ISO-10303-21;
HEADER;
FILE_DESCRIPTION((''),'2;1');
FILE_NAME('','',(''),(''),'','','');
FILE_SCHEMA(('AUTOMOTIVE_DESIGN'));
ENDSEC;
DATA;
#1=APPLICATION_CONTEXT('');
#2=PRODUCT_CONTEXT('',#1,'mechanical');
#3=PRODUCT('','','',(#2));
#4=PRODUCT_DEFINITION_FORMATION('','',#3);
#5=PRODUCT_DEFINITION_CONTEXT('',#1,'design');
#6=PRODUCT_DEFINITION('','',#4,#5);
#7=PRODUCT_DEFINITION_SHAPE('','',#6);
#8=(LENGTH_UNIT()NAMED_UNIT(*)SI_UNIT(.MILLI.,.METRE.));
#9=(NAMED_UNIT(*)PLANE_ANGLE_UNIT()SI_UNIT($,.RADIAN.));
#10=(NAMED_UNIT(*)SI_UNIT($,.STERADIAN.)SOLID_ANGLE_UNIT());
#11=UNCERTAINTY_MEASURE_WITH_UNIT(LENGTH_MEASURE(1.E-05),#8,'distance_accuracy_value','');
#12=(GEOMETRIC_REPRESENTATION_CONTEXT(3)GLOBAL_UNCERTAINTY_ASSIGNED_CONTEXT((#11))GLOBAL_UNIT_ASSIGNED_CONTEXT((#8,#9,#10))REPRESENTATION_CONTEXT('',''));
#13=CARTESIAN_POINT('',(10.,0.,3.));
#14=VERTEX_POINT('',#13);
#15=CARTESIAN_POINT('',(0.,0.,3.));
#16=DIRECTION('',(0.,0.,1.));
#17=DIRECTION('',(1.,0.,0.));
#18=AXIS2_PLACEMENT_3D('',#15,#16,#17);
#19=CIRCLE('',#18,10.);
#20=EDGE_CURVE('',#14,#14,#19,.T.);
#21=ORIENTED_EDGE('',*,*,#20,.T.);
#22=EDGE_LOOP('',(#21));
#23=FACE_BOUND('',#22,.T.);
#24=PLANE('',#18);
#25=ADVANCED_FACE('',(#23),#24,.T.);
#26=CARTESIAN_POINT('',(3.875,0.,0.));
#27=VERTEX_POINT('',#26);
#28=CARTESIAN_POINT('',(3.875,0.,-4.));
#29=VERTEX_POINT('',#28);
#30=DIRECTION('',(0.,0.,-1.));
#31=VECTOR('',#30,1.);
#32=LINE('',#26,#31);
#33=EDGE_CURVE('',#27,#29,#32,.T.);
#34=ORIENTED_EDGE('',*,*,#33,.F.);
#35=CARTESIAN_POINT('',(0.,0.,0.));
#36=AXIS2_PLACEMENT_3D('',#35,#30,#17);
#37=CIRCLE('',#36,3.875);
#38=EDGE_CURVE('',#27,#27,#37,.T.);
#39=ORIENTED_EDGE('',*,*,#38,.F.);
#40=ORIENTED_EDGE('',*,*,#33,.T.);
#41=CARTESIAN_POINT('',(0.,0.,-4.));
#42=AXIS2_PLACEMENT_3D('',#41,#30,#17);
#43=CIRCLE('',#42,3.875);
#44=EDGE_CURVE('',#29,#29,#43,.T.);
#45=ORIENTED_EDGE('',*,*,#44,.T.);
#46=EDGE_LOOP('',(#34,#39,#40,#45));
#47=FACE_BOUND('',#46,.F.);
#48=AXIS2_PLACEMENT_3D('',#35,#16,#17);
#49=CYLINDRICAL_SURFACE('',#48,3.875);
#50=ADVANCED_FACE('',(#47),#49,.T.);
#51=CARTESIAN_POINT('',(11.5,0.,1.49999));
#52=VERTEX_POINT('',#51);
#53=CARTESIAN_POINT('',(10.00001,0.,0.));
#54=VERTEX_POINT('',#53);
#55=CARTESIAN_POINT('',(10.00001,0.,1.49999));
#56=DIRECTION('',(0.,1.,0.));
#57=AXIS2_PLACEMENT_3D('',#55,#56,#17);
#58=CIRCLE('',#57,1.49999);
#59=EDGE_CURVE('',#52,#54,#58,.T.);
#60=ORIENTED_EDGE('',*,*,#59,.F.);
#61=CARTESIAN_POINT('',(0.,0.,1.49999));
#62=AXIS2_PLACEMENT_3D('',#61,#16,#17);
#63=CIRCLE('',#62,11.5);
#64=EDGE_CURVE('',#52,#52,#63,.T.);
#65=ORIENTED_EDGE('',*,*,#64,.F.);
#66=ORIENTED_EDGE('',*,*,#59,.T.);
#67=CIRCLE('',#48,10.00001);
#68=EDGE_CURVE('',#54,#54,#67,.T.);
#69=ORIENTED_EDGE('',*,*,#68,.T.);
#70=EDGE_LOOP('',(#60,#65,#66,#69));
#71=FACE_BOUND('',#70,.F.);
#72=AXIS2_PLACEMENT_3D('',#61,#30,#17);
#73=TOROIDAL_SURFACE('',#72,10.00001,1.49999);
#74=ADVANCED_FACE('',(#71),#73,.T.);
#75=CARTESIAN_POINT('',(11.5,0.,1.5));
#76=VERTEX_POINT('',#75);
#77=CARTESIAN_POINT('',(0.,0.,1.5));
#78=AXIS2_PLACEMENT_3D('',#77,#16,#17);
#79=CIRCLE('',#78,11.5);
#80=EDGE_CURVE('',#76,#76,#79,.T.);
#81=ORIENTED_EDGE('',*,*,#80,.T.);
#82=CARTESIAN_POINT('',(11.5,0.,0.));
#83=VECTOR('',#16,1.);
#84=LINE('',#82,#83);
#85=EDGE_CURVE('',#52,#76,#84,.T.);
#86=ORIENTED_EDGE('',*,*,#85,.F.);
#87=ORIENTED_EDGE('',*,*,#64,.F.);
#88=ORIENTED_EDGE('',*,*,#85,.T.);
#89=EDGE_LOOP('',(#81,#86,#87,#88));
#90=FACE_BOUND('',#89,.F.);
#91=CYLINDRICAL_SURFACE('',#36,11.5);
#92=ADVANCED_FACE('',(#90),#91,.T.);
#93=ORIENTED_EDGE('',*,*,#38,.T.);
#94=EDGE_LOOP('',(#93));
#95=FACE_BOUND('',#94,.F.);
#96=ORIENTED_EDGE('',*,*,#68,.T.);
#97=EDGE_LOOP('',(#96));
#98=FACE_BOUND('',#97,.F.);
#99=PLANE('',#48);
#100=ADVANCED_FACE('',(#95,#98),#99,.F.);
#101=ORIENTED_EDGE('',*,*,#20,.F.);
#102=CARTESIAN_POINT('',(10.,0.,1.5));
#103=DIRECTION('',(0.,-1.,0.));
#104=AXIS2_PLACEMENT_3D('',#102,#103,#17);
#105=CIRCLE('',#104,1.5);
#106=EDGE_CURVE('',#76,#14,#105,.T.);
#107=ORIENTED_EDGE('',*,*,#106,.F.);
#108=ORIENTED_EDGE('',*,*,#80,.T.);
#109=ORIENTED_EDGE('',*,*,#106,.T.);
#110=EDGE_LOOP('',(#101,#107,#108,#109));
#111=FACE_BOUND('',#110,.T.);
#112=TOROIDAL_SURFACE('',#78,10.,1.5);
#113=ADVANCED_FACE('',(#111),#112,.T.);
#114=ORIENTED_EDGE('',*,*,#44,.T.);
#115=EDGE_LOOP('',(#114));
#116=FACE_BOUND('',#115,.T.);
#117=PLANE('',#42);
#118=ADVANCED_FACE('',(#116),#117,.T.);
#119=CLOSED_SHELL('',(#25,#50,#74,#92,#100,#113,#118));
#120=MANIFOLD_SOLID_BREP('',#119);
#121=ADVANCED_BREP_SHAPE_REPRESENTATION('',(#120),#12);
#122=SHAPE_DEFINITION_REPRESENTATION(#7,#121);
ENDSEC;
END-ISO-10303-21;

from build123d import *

# Parameters (mm, degrees)
F0_R     = 11.5
F1_DEPTH = 3
F2_R     = 1.5
F3_R     = 1.49999
F4_R     = 3.875
F5_DEPTH = 4


# Not quite as in the source:
# - a fillet or chamfer is up to 0.001 mm smaller than in the source, because OpenCascade refuses the exact size


with BuildPart() as f1:
    # F0 (on Top) → F1 (new body)
    with BuildSketch(Plane.XY):
        Circle(F0_R)
    extrude(amount=F1_DEPTH)

    # F2
    f2_edges = [f1.edges().sort_by_distance(p)[0] for p in [
        (-11.5, 0, 3),
    ]]
    fillet(f2_edges, radius=F2_R)

    # F3 (radius 1.5 in the source; OpenCascade refuses exactly that, so slightly less here)
    f3_edges = [f1.edges().sort_by_distance(p)[0] for p in [
        (-11.5, 0, 0),
    ]]
    fillet(f3_edges, radius=F3_R)

    # F4 (on face) → F5 (join)
    with BuildSketch(Plane(origin=(0, 0, 0), x_dir=(1, 0, 0), z_dir=(0, 0, -1))):
        Circle(F4_R)
    extrude(amount=F5_DEPTH)


solid = f1.part
